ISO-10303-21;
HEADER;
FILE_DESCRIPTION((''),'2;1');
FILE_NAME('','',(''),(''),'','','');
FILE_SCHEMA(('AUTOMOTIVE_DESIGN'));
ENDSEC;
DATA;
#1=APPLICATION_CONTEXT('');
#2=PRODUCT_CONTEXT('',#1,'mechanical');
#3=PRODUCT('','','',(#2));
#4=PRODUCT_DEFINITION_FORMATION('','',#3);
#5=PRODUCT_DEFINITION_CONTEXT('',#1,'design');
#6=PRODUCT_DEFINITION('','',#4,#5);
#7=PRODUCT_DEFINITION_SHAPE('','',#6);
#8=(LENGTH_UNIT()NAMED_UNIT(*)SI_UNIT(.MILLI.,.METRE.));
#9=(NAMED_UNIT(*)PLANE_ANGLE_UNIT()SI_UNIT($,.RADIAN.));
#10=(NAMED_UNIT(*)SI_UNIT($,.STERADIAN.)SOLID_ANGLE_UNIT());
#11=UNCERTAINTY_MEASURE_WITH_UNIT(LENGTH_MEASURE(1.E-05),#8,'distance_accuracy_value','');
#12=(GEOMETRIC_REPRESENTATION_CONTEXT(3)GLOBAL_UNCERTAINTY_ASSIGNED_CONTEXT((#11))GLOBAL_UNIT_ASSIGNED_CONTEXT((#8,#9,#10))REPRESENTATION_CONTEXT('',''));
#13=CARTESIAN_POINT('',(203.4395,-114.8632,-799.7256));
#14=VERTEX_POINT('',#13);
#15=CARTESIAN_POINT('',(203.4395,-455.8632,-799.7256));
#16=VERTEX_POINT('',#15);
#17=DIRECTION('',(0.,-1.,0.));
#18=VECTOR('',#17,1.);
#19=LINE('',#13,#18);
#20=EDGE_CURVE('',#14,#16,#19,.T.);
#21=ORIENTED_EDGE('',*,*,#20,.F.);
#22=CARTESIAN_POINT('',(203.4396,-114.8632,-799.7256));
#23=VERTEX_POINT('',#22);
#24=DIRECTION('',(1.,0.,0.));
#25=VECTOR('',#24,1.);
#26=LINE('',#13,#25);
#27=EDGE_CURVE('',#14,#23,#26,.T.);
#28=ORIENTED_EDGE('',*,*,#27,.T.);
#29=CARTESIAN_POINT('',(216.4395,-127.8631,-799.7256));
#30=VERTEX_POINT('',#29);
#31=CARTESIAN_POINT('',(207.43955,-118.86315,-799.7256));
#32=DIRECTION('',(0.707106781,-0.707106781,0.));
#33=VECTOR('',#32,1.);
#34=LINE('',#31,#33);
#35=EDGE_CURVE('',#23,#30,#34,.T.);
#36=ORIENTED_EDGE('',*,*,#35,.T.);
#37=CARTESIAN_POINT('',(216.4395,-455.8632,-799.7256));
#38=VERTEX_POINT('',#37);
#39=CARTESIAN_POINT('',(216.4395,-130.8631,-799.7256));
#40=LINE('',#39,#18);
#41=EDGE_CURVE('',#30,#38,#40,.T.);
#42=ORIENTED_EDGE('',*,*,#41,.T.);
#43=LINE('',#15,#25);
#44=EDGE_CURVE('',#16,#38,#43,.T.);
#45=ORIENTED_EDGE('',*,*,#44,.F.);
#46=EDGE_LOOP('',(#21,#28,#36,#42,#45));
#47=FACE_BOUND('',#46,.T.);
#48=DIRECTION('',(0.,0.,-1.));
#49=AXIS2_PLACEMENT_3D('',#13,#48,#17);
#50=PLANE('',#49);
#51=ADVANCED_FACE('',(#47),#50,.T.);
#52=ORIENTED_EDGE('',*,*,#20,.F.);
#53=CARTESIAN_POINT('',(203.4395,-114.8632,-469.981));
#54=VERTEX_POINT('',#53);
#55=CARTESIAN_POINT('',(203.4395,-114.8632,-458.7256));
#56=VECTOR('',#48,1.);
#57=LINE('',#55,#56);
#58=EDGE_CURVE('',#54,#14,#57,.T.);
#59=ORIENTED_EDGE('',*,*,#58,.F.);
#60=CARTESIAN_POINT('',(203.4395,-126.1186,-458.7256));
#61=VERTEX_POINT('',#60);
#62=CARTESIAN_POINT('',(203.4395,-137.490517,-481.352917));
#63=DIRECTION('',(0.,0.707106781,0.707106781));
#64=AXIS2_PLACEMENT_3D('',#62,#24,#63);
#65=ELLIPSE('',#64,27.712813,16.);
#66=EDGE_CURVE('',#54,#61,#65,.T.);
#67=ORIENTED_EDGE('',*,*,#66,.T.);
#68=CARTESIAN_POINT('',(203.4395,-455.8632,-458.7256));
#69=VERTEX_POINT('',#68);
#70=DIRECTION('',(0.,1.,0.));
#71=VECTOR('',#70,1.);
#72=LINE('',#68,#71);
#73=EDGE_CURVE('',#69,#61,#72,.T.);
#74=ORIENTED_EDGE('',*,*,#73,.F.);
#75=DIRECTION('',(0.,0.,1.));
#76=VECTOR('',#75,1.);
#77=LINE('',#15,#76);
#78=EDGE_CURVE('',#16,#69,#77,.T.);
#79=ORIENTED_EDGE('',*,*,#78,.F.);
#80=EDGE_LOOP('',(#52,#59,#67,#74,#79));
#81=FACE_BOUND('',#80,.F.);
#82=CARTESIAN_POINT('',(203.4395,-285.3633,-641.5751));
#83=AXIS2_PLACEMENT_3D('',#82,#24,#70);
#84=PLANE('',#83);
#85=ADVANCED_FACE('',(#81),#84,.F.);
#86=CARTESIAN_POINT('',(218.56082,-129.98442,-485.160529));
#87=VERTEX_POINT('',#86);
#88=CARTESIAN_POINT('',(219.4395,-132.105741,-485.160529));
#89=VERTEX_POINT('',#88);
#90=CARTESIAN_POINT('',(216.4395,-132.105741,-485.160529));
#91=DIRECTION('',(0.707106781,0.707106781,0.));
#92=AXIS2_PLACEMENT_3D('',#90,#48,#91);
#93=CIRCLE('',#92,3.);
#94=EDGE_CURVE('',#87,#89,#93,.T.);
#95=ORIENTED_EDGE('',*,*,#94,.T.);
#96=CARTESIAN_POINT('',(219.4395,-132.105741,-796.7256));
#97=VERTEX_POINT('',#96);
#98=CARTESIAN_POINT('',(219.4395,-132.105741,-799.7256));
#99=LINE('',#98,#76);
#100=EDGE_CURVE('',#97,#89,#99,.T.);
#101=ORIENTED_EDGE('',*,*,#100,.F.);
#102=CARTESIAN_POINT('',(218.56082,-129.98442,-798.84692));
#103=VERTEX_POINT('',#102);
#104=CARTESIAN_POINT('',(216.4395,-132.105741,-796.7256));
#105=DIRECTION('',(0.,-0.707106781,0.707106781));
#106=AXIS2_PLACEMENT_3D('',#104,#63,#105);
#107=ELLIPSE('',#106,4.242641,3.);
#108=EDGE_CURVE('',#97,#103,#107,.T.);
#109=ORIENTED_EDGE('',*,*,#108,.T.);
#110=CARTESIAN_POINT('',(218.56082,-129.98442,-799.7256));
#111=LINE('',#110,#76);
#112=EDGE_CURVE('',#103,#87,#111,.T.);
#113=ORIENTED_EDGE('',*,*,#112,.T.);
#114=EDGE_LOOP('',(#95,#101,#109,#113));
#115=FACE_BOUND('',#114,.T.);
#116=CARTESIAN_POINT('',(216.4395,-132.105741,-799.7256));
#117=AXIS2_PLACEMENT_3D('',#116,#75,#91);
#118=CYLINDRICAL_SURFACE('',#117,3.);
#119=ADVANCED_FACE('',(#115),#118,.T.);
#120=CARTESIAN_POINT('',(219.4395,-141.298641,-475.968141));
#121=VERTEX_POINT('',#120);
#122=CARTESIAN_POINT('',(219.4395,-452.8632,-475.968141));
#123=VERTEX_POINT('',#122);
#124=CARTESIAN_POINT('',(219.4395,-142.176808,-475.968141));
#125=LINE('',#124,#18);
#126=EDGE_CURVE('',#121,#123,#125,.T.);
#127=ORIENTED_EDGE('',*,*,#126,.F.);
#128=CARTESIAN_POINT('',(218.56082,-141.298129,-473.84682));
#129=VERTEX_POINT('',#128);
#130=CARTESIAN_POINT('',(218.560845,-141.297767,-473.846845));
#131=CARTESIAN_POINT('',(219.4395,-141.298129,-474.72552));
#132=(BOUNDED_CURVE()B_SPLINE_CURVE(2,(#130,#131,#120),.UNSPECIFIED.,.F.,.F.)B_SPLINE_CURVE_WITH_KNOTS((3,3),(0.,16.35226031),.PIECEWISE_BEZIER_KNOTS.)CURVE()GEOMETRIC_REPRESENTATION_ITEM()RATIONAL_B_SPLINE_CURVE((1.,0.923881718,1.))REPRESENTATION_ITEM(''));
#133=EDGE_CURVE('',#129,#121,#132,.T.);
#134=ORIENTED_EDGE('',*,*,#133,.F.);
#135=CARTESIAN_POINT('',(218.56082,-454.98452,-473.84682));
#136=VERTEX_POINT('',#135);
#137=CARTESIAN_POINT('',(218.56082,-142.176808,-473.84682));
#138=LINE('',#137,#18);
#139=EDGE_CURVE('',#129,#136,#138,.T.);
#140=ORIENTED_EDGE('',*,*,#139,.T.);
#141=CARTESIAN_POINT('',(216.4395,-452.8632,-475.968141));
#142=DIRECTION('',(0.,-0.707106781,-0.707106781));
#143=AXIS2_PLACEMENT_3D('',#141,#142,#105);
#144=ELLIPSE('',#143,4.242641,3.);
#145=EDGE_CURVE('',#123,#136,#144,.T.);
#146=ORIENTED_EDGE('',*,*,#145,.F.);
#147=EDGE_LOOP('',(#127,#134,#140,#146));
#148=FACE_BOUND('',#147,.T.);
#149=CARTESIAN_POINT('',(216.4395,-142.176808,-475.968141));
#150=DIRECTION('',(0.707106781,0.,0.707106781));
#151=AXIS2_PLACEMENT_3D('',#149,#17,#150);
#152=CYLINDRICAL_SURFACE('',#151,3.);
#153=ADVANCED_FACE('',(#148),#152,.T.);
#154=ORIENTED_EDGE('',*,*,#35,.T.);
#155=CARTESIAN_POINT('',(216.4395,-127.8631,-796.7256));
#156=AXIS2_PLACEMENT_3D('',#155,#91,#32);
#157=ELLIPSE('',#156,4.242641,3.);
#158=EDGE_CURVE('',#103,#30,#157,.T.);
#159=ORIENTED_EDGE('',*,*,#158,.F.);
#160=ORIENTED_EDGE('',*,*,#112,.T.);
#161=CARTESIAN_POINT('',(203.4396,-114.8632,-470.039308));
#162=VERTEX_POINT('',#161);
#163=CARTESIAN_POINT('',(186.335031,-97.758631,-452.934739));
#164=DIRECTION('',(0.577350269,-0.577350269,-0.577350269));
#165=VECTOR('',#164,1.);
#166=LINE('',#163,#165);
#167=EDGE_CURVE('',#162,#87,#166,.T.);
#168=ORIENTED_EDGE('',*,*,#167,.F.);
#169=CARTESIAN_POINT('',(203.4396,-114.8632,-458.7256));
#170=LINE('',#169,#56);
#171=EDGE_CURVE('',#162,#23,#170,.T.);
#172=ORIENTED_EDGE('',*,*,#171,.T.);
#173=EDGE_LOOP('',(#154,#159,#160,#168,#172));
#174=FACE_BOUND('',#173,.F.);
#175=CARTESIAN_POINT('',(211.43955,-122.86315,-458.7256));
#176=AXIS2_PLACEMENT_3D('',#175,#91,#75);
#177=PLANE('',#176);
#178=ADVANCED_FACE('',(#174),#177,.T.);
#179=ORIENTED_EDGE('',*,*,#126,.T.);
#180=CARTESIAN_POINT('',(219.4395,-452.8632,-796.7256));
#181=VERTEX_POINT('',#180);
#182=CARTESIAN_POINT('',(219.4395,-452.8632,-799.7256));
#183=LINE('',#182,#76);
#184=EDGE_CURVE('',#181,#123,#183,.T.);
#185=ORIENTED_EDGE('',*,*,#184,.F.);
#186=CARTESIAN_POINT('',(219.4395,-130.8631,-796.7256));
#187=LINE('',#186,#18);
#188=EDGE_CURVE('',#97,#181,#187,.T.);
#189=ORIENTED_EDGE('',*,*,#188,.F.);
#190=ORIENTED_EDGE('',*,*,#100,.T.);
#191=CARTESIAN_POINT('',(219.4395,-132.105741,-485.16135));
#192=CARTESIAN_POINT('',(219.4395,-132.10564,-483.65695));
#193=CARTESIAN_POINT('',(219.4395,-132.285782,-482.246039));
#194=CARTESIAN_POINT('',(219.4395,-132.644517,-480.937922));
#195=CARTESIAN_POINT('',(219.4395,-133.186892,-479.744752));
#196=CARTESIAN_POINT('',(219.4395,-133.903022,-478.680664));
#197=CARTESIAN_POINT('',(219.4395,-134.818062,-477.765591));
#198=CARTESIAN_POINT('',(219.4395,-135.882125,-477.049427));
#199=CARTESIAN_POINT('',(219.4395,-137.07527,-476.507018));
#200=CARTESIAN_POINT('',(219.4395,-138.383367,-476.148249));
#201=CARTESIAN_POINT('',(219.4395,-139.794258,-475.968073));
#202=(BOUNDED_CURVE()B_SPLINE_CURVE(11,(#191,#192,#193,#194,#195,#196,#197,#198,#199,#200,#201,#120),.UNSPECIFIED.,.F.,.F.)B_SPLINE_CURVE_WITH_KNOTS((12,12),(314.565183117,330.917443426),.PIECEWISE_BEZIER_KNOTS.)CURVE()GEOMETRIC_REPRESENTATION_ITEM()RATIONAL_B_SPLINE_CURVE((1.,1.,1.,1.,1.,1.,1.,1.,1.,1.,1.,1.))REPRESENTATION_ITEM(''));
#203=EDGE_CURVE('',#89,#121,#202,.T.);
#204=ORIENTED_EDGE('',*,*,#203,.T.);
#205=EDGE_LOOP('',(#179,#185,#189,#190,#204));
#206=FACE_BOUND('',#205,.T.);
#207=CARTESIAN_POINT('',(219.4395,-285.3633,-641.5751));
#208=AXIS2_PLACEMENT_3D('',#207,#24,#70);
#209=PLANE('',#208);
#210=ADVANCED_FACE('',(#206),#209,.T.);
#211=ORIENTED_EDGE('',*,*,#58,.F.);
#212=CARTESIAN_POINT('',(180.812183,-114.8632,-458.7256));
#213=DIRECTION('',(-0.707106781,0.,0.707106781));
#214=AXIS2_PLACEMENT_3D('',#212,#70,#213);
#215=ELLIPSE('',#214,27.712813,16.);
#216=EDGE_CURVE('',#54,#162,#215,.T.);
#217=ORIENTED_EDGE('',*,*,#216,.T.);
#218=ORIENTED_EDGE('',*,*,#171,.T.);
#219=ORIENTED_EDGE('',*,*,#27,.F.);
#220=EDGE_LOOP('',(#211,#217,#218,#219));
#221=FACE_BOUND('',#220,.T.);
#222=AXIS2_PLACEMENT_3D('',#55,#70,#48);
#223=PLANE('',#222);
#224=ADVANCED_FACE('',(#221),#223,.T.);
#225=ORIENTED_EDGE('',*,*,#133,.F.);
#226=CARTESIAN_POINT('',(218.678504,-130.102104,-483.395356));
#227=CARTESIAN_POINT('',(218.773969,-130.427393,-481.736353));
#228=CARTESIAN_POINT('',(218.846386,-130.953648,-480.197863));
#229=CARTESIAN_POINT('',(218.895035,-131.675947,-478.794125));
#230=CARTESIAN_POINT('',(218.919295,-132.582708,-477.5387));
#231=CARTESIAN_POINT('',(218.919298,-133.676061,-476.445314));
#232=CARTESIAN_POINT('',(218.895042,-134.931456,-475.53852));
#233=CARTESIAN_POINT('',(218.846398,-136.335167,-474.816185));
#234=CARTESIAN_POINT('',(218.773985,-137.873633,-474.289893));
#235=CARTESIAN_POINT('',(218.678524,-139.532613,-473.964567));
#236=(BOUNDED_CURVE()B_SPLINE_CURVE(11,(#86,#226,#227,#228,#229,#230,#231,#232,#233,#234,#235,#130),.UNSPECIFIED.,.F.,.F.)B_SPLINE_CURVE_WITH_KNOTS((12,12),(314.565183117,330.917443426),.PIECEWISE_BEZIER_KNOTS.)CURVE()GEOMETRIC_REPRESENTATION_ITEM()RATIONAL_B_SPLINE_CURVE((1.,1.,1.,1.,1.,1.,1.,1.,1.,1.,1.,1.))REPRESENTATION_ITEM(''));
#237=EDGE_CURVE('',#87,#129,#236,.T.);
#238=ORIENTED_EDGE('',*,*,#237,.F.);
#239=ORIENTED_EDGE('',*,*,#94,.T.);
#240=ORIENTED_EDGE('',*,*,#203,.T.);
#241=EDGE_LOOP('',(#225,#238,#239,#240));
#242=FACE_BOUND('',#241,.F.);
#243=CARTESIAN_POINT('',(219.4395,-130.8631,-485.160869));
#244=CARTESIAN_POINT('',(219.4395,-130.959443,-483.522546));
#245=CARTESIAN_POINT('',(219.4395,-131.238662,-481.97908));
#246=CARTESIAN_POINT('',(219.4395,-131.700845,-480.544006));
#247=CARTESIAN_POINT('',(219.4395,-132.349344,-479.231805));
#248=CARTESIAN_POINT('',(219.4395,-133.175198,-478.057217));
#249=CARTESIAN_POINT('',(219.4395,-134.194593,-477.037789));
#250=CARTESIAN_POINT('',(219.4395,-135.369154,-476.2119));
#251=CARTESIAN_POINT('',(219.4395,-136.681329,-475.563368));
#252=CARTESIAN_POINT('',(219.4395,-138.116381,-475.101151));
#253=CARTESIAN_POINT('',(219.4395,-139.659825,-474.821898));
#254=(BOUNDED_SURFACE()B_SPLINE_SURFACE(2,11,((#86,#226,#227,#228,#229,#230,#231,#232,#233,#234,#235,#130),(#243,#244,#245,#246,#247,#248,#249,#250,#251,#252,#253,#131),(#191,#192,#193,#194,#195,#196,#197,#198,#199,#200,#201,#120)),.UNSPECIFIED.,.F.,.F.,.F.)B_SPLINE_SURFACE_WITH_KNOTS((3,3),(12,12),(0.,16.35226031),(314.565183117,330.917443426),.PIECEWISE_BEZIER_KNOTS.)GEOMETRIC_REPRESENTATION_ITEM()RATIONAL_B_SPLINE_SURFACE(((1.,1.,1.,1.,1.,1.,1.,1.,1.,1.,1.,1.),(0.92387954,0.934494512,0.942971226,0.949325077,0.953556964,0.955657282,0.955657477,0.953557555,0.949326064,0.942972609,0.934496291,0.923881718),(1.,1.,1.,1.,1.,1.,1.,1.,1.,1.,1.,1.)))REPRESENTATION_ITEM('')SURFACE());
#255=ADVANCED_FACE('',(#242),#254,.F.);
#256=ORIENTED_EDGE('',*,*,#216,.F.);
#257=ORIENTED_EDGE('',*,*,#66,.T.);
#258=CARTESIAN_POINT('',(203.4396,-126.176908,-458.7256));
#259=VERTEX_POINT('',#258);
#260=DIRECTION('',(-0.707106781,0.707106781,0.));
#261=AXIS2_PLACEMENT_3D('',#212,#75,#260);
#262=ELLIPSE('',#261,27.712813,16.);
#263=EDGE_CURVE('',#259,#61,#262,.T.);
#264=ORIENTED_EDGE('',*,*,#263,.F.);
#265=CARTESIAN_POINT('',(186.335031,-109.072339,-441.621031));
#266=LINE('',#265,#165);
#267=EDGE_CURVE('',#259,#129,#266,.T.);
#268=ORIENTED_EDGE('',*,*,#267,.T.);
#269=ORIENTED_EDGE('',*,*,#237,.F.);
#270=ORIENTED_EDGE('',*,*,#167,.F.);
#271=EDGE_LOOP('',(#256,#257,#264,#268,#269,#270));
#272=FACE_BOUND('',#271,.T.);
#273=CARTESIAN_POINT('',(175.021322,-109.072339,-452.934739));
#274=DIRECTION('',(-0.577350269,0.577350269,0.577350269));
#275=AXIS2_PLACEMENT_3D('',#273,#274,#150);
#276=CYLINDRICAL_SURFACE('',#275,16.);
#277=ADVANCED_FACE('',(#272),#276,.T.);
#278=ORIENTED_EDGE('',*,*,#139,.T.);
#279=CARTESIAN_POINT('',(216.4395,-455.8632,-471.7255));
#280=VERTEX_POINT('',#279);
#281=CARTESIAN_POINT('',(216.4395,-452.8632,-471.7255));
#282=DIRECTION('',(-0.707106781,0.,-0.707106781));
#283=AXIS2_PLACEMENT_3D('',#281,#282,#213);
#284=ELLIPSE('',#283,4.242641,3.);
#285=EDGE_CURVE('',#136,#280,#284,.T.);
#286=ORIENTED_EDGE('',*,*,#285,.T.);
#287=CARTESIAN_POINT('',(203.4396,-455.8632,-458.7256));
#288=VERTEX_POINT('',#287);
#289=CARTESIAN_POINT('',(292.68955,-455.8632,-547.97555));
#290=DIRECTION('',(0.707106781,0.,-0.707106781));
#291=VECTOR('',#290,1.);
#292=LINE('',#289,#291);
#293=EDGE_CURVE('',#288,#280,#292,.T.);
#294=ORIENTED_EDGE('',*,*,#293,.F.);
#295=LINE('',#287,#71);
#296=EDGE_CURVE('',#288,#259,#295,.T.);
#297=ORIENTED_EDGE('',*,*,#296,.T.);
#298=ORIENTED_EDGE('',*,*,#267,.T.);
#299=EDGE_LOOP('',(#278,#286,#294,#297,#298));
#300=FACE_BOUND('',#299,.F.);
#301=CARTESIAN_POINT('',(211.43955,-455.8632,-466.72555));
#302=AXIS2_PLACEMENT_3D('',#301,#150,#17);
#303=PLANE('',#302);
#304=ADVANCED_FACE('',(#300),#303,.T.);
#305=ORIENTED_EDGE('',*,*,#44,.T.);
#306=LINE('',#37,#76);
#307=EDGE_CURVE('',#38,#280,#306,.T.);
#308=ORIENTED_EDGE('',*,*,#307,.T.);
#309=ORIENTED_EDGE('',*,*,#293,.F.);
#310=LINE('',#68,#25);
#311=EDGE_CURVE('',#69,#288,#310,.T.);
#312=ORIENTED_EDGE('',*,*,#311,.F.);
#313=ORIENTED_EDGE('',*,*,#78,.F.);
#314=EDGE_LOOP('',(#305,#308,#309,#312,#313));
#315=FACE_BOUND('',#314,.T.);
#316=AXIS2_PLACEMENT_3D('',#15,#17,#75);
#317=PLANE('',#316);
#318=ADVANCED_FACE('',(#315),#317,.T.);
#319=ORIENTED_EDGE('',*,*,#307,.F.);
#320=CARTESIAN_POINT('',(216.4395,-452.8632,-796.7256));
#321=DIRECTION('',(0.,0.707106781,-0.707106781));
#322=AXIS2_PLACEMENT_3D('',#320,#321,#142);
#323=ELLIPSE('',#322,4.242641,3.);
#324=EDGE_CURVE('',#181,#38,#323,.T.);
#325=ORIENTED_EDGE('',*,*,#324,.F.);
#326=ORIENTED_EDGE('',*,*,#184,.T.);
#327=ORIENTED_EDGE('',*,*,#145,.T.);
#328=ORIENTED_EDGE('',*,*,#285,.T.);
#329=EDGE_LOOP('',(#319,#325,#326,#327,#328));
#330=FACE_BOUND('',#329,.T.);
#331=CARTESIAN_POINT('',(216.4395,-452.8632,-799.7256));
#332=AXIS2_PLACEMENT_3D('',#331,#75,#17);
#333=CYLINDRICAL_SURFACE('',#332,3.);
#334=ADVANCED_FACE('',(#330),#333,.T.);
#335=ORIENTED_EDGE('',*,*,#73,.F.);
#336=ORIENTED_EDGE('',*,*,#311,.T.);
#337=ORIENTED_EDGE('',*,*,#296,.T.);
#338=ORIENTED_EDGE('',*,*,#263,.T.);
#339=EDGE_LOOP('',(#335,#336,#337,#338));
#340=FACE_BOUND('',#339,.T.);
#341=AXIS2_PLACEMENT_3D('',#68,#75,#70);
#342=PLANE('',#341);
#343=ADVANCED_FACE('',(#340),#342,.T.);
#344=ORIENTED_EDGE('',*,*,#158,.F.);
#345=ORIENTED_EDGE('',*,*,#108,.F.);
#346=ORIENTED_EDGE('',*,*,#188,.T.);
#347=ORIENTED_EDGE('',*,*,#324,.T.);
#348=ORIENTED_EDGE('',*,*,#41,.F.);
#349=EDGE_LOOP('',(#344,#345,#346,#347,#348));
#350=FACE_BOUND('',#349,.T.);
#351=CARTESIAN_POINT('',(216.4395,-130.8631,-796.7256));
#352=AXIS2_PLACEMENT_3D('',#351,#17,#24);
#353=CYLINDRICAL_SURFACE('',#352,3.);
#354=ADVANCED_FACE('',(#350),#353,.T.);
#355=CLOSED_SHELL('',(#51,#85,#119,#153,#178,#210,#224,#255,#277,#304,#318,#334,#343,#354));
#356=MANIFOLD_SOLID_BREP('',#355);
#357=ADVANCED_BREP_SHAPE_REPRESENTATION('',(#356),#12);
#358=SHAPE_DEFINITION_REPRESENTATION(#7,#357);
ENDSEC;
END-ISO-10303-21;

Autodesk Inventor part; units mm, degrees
ref_plane "YZ Plane" through (0, 0, 0) normal (1, 0, 0) x (0, 1, 0)
ref_plane "XZ Plane" through (0, 0, 0) normal (0, 1, 0) x (-1, 0, 0)
ref_plane "РабПлоскость1" through (203.4395, -285.3633, -641.5751) normal (1, 0, 0) x (0, 1, 0)
sketch "Эскиз1" plane through (203.4395, -285.3633, -641.5751) normal (1, 0, 0) x (0, 1, 0)
  line L0 (-170.4999, 182.8495) -> (170.5001, 182.8495)
  line L1 (170.5001, 182.8495) -> (170.5001, -158.1505)
  line L2 (170.5001, -158.1505) -> (-170.4999, -158.1505)
  line L3 (-170.4999, -158.1505) -> (-170.4999, 182.8495)
  point P0 (285.3633, 641.5751)
  point P1 (49.5, 182.8495)
  point P2 (-170.4999, 137.85)
  dimension "d5" = 341
  dimension "d6" = 341
extrude "Выдавливание1" add sketch "Эскиз1" along normal blind 16
chamfer "Фаска1" distance 16 angle 45 1 edges at (219.4395, -114.8632, -629.2256)
sketch "Эскиз2" plane through (203.4395, -455.8632, -458.7256) normal (0, 0, 1) x (1, 0, 0)
  line L0 (16, 0) -> (16, 325) projected
  point P0 (-203.4395, 455.8632)
  point P1 (16, 220)
sketch "Эскиз3" plane through (219.4395, -285.3633, -641.5751) normal (1, 0, 0) x (0, 0, -1)
  line L0 (-182.8495, -170.4999) -> (158.1505, -170.4999) projected
  point P0 (-137.85, -170.4999)
chamfer "Фаска2" distance 16 angle 45 1 edges at (219.4395, -293.3631, -458.7256)
fillet "Сопряжение1" radius 16 1 edges at (211.4395, -122.8631, -466.7255)
fillet "Сопряжение2" radius 3 5 edges at (219.4395, -133.8946, -477.757) (219.4395, -299.02, -474.7255) (219.4395, -130.8631, -642.8824) (219.4395, -293.3631, -799.7256) (219.4395, -455.8632, -637.2255)
properties part number "N__side_sticker" material "Древесно-стружечная плита"
